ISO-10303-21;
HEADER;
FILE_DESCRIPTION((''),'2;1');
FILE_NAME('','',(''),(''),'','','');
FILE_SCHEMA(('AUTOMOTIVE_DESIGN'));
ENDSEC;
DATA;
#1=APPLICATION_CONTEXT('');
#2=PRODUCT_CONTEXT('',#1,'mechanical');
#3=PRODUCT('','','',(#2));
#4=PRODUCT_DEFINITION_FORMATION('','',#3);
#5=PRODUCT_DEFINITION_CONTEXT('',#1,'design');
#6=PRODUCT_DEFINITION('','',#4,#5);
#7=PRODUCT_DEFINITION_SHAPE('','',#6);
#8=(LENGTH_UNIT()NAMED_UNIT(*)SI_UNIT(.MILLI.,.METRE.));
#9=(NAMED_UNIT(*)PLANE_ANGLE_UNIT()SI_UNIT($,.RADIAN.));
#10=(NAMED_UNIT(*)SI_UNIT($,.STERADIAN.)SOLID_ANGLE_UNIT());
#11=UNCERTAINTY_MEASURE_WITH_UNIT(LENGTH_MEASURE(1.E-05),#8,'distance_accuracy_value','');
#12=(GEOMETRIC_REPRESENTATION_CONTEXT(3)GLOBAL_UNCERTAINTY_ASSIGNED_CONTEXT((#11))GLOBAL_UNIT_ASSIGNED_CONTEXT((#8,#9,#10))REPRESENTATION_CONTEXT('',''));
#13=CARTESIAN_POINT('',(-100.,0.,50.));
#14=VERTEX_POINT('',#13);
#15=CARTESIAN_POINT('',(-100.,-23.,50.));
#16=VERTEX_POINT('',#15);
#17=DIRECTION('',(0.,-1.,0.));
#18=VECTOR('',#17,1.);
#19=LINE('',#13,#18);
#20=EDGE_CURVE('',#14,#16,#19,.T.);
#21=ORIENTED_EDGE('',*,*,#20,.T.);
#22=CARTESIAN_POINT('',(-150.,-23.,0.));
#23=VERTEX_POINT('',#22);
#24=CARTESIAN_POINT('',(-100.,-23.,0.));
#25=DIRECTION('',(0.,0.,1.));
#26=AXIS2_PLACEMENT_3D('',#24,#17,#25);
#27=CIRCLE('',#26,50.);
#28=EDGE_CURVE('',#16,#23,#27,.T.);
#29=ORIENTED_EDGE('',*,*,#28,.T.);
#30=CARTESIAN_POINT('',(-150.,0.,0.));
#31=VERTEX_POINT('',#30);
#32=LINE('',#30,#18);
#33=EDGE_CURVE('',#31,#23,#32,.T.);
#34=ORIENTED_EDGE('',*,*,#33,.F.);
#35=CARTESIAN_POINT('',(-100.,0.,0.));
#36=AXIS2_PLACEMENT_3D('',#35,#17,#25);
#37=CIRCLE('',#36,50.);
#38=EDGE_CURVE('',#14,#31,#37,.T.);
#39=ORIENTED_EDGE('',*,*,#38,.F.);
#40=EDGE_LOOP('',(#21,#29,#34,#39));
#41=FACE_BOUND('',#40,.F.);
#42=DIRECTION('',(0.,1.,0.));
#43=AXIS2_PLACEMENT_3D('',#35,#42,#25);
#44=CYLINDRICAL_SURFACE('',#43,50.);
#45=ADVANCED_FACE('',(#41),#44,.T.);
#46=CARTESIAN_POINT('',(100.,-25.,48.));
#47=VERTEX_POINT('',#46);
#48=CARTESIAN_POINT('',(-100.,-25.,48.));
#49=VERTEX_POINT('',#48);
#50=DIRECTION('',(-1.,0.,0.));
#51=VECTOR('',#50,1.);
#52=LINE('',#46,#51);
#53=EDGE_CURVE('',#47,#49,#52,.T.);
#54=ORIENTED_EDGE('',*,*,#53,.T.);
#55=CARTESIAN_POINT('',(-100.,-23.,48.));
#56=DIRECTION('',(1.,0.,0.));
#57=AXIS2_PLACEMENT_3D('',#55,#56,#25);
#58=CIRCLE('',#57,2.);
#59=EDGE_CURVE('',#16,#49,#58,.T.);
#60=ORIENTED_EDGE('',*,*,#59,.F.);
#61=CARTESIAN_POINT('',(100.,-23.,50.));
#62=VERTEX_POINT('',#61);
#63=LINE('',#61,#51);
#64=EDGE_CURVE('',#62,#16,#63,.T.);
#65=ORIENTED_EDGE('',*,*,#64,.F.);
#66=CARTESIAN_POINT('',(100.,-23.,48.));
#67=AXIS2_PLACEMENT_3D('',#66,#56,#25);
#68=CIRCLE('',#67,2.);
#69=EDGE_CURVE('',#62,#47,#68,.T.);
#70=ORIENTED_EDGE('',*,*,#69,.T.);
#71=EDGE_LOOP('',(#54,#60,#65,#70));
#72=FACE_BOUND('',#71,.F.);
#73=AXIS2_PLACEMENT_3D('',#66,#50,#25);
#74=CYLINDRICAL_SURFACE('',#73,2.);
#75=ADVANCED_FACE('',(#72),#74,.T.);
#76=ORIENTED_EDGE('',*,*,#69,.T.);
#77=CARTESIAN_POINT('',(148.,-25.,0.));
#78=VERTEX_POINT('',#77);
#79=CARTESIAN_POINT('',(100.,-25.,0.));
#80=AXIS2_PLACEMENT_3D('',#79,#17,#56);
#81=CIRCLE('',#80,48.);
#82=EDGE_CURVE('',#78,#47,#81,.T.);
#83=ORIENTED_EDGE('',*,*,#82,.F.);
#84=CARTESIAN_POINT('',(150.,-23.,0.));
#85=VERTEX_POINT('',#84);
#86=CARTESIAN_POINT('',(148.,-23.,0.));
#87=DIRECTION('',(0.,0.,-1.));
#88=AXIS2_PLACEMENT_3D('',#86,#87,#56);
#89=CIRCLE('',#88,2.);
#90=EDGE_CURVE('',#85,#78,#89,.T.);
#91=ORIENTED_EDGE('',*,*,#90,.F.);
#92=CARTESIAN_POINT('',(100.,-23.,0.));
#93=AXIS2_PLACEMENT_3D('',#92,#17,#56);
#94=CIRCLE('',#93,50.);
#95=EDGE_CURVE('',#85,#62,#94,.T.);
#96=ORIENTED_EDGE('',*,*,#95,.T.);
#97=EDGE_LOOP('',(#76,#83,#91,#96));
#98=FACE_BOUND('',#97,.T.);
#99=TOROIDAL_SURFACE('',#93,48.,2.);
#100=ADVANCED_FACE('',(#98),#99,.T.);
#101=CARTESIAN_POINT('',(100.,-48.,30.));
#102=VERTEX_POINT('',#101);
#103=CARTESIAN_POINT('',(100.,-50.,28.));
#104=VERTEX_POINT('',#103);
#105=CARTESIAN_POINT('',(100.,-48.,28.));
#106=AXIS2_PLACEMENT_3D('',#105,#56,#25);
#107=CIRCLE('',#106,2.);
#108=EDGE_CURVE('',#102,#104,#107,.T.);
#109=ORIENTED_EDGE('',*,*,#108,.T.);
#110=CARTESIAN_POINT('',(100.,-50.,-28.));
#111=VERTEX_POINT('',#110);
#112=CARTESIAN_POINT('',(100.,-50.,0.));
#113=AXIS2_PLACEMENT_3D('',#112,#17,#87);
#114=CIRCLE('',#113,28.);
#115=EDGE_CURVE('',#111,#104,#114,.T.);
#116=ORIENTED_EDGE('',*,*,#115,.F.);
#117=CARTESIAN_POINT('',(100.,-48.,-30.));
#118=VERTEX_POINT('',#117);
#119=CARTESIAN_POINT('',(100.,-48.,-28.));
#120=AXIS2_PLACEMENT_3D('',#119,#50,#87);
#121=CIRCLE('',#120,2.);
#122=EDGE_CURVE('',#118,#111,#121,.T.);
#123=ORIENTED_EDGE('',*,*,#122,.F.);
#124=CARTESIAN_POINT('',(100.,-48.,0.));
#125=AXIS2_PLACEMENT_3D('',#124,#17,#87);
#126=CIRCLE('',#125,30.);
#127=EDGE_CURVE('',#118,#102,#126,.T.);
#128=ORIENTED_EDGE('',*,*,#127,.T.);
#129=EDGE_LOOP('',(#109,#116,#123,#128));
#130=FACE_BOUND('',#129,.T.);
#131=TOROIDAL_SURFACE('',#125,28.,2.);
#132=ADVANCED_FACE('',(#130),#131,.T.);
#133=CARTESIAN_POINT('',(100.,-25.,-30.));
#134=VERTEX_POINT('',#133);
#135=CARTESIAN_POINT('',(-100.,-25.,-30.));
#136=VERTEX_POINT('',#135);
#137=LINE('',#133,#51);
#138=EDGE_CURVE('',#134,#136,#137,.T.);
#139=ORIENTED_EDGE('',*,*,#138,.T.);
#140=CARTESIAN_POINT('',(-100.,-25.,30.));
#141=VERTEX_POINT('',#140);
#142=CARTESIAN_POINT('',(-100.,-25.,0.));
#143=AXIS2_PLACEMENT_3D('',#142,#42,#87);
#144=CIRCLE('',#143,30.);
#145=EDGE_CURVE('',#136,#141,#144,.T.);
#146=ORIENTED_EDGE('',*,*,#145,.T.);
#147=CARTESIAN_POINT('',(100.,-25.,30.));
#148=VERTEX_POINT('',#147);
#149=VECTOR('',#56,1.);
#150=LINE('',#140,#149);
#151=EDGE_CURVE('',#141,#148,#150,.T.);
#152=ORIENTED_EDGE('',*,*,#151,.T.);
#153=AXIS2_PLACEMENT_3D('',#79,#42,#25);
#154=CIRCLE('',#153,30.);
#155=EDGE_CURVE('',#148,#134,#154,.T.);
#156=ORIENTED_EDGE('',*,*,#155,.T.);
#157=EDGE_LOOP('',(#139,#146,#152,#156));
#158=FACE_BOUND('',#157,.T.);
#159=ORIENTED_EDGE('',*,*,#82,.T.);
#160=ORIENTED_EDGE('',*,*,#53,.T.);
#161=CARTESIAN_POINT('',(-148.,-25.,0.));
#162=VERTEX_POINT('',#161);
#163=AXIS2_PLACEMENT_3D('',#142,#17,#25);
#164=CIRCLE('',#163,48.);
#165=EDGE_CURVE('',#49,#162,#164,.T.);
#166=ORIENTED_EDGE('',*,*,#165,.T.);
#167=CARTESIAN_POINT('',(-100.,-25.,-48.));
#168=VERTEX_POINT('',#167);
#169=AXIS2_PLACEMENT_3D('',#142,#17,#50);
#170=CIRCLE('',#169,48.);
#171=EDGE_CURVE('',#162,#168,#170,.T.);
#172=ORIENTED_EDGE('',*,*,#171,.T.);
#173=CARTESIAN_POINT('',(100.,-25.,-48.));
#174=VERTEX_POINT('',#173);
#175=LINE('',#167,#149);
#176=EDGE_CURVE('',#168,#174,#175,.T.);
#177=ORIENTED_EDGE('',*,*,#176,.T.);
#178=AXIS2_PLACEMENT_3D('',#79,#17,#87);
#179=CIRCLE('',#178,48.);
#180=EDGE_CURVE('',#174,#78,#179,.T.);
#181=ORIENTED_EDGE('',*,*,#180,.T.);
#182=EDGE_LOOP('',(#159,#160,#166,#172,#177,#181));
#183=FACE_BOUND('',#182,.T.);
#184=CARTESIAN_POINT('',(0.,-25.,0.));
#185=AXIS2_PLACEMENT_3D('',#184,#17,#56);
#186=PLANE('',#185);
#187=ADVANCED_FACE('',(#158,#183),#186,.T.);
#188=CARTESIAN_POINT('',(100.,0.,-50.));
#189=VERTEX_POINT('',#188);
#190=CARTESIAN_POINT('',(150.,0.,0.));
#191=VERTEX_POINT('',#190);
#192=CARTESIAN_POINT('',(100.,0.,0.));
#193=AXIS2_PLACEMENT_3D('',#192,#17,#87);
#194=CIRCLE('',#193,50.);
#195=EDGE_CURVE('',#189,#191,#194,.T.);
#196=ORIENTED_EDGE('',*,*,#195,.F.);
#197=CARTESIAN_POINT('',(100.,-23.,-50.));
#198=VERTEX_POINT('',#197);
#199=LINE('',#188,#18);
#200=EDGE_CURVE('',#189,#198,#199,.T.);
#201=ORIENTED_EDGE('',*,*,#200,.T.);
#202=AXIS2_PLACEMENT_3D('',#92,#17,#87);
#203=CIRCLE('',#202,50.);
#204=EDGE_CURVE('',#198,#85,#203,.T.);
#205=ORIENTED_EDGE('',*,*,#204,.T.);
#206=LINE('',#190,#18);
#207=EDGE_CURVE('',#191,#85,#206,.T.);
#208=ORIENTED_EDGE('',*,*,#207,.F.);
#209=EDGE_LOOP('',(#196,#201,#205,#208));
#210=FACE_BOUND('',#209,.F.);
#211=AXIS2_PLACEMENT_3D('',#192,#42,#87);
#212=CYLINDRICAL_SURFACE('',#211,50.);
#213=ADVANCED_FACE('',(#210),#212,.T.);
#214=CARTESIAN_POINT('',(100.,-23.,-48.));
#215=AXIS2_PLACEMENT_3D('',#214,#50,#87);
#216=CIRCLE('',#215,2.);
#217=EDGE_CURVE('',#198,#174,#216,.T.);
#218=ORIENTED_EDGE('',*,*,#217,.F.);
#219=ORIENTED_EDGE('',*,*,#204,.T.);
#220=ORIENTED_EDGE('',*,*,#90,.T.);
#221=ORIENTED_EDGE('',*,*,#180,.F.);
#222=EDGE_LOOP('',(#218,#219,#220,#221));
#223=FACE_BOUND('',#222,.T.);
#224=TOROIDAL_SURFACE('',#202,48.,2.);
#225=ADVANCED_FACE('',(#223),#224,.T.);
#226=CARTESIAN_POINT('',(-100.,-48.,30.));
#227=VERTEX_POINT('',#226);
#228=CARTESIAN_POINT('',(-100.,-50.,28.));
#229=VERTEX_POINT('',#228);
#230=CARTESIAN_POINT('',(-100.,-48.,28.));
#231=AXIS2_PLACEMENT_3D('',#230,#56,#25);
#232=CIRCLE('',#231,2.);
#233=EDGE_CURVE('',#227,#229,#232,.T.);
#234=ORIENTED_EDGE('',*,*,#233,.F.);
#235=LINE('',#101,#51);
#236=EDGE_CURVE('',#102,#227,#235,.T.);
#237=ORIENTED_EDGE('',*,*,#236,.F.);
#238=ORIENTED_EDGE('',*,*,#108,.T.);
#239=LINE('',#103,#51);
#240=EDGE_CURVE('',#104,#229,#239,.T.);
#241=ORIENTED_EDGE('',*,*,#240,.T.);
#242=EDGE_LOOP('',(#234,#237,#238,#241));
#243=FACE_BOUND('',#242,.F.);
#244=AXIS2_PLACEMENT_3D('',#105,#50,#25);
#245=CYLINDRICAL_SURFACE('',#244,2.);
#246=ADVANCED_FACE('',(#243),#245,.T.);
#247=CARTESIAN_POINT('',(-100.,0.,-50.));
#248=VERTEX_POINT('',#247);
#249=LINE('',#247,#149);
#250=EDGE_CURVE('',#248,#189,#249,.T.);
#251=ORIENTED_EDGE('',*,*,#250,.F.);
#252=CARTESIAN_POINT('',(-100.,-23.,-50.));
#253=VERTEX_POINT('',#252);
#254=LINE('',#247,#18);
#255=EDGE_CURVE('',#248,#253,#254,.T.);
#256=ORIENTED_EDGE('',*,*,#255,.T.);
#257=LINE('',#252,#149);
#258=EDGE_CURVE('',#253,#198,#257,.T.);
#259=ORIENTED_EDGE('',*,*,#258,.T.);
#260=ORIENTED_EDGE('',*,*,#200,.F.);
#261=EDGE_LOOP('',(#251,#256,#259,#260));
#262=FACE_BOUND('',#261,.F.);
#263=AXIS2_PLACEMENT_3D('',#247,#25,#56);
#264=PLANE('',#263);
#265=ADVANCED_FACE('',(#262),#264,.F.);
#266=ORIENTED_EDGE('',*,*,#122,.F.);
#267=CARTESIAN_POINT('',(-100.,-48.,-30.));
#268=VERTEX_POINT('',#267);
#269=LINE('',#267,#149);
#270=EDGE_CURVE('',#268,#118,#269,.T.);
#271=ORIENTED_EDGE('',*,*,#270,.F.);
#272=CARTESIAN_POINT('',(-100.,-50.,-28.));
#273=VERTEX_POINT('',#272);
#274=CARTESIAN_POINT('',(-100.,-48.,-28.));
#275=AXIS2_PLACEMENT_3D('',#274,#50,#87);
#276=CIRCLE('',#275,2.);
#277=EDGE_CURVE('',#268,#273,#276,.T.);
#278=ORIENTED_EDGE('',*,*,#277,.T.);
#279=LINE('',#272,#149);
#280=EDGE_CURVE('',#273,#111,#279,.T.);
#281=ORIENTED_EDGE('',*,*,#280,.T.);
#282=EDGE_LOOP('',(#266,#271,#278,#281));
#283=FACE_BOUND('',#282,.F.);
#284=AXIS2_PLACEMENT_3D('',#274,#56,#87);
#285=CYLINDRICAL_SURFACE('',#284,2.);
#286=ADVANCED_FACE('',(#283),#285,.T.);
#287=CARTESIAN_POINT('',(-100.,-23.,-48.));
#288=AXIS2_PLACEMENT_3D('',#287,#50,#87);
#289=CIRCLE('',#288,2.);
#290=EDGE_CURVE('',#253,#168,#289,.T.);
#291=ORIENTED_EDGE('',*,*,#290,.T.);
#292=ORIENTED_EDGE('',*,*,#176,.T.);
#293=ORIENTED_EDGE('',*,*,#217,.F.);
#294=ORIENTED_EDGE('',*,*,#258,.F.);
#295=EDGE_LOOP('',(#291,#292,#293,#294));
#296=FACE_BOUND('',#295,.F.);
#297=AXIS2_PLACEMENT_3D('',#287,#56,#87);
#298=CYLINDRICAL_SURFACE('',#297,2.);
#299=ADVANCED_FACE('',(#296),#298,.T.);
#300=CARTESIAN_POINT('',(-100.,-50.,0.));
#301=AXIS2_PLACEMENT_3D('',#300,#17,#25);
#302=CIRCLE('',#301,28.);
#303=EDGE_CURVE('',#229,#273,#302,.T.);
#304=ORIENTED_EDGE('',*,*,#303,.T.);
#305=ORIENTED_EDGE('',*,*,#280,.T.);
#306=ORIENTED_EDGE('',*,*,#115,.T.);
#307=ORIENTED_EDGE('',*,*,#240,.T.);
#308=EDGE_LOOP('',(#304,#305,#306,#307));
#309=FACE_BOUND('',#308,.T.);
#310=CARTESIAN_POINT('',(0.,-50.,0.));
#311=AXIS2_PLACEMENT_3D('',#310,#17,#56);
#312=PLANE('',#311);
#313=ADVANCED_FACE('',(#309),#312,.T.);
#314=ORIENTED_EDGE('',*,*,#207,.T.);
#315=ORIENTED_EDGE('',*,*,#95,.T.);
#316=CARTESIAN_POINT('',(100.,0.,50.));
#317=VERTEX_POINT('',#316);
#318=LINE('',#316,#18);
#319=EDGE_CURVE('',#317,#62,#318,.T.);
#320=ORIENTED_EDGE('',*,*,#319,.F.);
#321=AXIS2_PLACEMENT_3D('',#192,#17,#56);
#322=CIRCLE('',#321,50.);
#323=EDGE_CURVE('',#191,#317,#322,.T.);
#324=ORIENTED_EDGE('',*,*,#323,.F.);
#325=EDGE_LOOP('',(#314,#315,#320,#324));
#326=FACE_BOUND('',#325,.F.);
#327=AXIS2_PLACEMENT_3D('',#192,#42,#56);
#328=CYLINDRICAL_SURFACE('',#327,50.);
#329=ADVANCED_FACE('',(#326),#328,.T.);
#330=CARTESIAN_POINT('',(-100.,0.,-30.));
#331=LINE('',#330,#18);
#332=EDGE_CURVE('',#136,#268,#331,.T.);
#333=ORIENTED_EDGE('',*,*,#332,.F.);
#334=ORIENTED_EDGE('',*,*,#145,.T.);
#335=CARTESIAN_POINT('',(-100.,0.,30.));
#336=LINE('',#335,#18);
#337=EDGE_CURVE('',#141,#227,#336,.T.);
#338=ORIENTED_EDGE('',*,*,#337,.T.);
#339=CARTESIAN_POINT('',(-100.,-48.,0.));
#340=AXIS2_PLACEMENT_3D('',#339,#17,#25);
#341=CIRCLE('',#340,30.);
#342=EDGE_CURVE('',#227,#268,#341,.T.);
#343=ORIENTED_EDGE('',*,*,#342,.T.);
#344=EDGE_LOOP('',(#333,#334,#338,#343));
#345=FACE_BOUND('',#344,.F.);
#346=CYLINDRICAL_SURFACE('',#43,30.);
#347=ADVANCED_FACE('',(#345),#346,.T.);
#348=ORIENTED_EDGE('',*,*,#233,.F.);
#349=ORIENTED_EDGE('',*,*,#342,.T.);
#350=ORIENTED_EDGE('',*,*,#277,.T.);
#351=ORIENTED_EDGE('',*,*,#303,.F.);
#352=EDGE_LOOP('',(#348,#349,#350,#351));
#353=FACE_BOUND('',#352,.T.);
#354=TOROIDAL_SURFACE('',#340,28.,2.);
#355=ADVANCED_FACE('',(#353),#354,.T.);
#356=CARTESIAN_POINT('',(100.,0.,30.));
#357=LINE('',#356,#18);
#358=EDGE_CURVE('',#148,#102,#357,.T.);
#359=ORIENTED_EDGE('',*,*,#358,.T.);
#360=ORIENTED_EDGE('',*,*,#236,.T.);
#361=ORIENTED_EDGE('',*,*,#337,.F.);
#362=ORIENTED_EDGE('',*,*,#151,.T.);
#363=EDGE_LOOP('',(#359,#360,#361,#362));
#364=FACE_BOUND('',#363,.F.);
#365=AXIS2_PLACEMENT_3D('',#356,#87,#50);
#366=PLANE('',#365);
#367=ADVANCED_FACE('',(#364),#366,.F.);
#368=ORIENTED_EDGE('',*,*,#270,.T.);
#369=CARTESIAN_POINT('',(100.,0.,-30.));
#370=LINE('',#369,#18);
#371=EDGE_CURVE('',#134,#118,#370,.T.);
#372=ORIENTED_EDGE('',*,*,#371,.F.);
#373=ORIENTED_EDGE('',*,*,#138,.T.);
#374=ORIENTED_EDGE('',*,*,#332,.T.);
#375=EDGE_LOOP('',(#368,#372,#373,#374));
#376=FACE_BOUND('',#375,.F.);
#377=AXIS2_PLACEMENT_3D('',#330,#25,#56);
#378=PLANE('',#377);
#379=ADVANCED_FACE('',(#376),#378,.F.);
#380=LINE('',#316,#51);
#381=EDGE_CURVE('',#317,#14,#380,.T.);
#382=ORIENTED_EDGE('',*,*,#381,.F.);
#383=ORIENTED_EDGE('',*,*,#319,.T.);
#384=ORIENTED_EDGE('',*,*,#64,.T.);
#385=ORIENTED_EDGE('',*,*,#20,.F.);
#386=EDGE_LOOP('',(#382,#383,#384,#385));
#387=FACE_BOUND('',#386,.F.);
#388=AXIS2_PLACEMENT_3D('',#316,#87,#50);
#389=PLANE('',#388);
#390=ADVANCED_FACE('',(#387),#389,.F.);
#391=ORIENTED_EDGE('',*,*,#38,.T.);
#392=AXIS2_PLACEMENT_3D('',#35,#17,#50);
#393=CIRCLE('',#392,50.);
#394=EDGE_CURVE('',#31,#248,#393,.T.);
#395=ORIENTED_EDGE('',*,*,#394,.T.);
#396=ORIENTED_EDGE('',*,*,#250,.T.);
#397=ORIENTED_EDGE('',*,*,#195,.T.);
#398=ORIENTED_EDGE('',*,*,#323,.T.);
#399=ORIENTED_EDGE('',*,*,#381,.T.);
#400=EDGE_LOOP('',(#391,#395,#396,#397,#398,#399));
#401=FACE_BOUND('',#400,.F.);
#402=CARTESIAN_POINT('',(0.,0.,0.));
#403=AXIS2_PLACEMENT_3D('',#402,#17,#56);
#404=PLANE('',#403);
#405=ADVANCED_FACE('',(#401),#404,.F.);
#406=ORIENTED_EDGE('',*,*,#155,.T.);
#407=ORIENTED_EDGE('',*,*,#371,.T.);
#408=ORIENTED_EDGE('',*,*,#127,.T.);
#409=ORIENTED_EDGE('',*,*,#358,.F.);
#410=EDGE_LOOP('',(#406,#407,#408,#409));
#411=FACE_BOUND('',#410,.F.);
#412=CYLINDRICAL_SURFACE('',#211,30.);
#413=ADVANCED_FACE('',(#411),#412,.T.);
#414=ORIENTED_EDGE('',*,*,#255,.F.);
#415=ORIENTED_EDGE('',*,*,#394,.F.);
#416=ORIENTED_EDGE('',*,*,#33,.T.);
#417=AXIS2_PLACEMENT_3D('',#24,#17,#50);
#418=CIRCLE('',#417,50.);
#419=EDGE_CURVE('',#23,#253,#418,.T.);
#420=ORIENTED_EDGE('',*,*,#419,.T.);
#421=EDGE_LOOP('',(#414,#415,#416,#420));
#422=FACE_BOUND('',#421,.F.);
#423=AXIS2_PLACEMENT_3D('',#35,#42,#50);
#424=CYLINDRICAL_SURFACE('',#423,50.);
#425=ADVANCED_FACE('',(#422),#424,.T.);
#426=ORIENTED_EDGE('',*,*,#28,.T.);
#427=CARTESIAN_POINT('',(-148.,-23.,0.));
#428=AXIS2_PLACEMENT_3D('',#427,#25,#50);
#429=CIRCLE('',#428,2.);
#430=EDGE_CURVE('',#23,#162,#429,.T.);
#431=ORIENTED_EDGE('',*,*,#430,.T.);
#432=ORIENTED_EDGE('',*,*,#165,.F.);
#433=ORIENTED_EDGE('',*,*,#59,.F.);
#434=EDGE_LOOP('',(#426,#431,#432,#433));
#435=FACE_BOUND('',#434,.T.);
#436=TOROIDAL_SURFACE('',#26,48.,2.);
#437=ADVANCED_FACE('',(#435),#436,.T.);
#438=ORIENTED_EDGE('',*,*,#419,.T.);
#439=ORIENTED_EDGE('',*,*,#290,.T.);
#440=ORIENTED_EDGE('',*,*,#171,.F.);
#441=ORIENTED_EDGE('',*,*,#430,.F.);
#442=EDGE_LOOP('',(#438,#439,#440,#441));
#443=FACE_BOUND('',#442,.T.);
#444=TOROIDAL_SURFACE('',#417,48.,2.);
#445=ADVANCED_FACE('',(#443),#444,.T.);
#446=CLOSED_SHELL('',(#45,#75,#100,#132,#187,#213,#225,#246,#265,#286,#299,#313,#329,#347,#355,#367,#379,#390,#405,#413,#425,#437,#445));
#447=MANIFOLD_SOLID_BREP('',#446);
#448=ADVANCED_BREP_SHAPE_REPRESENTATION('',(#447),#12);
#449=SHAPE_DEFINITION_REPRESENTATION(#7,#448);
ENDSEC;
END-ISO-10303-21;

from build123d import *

# Parameters (mm, degrees)
F1_DEPTH = 50
F2_DEPTH = 25
F3_R     = 2


with BuildPart() as f1:
    # F0 (on Front) → F1 (new body)
    with BuildSketch(Plane.XZ):
        with BuildLine():
            Line((-100, -30), (100, -30))
            ThreePointArc((100, -30), (121.2132034356, -21.2132034356), (130, 0))
            ThreePointArc((130, 0), (121.2132034356, 21.2132034356), (100, 30))
            Line((100, 30), (-100, 30))
            ThreePointArc((-100, 30), (-121.2132034356, 21.2132034356), (-130, 0))
            ThreePointArc((-130, 0), (-121.2132034356, -21.2132034356), (-100, -30))
        make_face()
    extrude(amount=F1_DEPTH)

    # F0 (on Front) → F2 (join)
    with BuildSketch(Plane.XZ):
        with BuildLine():
            Line((-100, -50), (100, -50))
            ThreePointArc((100, -50), (135.3553390593, -35.3553390593), (150, 0))
            ThreePointArc((150, 0), (135.3553390593, 35.3553390593), (100, 50))
            Line((100, 50), (-100, 50))
            ThreePointArc((-100, 50), (-135.3553390593, 35.3553390593), (-150, 0))
            ThreePointArc((-150, 0), (-135.3553390593, -35.3553390593), (-100, -50))
        make_face()
        with BuildLine():
            ThreePointArc((130, 0), (121.2132034356, -21.2132034356), (100, -30))
            Line((100, -30), (-100, -30))
            ThreePointArc((-100, -30), (-121.2132034356, -21.2132034356), (-130, 0))
            ThreePointArc((-130, 0), (-121.2132034356, 21.2132034356), (-100, 30))
            Line((-100, 30), (100, 30))
            ThreePointArc((100, 30), (121.2132034356, 21.2132034356), (130, 0))
        make_face(mode=Mode.SUBTRACT)
    extrude(amount=F2_DEPTH)

    # F3
    f3_edges = [f1.edges().sort_by_distance(p)[0] for p in [
        (-150, -25, 0),
        (0, -50, -30),
        (0, -25, -50),
        (150, -25, 0),
        (0, -25, 50),
        (130, -50, 0),
        (0, -50, 30),
        (-130, -50, 0),
    ]]
    fillet(f3_edges, radius=F3_R)


solid = f1.part
